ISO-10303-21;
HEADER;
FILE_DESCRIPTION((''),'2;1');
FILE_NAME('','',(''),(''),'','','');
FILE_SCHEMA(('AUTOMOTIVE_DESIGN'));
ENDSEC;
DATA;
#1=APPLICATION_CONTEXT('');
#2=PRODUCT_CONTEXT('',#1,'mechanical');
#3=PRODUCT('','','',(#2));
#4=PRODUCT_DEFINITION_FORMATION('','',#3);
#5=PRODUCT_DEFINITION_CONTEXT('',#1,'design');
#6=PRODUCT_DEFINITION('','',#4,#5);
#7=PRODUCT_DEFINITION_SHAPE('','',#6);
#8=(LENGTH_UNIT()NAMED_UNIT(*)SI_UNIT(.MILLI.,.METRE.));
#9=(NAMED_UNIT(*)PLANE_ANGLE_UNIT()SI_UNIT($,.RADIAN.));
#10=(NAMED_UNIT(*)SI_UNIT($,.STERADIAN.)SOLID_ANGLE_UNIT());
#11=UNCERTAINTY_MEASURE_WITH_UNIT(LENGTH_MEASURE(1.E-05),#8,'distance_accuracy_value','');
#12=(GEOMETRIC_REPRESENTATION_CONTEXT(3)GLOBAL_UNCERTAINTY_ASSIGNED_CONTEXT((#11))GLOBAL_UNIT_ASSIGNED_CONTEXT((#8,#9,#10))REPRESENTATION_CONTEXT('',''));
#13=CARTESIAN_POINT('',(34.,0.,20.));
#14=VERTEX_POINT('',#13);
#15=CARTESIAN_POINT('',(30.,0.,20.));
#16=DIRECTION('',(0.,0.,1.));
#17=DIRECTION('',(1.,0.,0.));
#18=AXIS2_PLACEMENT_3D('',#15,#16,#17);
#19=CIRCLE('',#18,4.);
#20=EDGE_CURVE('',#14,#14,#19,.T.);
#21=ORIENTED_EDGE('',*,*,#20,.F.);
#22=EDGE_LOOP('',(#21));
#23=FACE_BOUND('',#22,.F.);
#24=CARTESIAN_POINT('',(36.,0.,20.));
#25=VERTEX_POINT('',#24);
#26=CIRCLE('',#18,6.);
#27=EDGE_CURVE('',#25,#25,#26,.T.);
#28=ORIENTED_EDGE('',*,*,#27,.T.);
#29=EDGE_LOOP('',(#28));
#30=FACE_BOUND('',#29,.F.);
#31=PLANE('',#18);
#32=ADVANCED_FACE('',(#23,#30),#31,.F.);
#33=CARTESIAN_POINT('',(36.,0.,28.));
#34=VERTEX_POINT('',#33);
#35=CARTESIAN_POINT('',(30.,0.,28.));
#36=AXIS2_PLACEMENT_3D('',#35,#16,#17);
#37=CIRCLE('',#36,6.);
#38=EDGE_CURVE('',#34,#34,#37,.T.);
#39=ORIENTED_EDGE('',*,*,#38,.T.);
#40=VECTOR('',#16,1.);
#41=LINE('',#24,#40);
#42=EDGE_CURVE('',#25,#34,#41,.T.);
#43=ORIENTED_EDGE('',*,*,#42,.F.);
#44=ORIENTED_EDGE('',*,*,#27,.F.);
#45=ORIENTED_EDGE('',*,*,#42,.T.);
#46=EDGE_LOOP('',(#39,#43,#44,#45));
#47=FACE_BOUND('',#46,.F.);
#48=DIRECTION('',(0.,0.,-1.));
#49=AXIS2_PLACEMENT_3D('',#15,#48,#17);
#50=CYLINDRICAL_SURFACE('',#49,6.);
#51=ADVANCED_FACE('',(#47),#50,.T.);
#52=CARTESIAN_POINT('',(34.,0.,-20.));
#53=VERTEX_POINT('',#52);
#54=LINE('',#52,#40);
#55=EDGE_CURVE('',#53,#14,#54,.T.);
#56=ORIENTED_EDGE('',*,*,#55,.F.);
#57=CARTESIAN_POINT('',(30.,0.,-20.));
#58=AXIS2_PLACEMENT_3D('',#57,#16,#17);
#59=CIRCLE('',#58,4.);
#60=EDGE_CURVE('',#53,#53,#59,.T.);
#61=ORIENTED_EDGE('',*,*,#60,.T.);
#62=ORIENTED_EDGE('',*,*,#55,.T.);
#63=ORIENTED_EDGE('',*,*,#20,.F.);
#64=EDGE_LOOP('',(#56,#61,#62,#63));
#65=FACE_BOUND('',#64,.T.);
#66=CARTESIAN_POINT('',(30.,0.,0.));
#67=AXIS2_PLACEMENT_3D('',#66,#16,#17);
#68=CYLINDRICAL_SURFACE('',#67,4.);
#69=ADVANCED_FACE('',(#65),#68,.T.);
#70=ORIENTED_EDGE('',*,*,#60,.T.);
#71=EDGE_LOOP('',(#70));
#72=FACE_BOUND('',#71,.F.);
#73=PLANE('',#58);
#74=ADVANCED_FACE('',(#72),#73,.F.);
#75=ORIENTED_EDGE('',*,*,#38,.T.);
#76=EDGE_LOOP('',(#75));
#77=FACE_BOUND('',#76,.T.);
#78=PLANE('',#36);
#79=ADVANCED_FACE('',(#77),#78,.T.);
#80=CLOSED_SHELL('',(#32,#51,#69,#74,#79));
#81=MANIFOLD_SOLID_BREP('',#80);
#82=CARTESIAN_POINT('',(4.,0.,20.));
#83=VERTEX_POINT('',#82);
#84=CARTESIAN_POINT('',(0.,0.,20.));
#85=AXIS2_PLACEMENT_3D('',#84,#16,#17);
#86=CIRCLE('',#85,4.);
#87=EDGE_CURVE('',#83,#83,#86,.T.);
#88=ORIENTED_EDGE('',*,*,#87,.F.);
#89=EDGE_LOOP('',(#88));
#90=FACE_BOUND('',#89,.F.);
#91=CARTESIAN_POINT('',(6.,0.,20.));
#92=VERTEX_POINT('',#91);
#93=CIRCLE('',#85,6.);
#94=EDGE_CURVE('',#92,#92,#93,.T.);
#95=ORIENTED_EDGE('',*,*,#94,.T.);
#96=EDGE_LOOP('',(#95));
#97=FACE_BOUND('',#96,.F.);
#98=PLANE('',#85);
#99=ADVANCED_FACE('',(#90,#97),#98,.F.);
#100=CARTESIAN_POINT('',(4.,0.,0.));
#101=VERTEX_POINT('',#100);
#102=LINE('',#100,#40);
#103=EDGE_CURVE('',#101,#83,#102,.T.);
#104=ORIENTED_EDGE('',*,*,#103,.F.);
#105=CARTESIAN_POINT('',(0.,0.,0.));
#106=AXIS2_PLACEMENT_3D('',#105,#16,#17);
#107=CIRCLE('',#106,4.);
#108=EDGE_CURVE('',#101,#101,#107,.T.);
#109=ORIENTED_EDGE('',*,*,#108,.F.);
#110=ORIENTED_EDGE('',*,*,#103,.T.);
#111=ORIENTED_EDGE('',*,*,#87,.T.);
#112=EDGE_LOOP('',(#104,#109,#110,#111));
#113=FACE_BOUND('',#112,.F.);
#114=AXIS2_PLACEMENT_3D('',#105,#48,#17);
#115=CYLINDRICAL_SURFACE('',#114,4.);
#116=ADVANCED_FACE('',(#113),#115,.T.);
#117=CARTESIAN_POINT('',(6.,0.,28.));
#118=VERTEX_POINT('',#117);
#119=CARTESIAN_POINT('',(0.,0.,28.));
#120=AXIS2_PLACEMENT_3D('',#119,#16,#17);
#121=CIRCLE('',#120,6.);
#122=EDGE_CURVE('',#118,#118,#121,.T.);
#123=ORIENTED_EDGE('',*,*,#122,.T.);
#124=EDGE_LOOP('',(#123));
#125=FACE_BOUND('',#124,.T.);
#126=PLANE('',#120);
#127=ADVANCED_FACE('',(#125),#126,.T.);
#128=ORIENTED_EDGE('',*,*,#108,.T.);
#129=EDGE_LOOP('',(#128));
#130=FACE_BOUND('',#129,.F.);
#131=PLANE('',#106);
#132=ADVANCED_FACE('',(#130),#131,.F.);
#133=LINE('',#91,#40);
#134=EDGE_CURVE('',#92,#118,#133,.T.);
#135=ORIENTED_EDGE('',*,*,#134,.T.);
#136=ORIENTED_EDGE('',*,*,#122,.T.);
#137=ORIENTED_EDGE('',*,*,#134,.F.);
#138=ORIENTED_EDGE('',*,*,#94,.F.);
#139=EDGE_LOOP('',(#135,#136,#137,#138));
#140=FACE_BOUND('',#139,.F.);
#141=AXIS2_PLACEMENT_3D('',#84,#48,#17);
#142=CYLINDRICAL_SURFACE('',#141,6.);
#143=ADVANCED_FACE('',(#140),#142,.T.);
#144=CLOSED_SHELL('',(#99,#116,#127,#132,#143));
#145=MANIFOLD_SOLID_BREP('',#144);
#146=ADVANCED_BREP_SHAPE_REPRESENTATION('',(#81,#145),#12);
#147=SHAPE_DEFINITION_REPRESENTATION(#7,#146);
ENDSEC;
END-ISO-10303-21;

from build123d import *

# Parameters (mm, degrees)
F0_R     = 4
F1_DEPTH = 20
F2_R     = 6
F3_DEPTH = 8
F6_DEPTH = 20


# Not quite as in the source:
# - a feature of the source that left no trace in its solid (it failed there, or was rolled back) is left out


with BuildPart() as f1:
    # F0 (on Top) → F1 (new body)
    with BuildSketch(Plane.XY):
        Circle(F0_R)
    extrude(amount=F1_DEPTH)

    # F2 (on face) → F3 (join)
    with BuildSketch(Plane.XY.offset(20)):
        Circle(F2_R)
    extrude(amount=F3_DEPTH)


with BuildPart() as f5_1:
    # F5: copy of F1
    add(f1.part.moved(Location((30, 0, 0))))

    # F6 (add): a face of the model
    f6_faces = [f5_1.faces().sort_by_distance(p)[0] for p in [
        (30, 0, 0),
    ]]
    extrude(f6_faces, amount=F6_DEPTH)


solid = Compound([f1.part, f5_1.part])
